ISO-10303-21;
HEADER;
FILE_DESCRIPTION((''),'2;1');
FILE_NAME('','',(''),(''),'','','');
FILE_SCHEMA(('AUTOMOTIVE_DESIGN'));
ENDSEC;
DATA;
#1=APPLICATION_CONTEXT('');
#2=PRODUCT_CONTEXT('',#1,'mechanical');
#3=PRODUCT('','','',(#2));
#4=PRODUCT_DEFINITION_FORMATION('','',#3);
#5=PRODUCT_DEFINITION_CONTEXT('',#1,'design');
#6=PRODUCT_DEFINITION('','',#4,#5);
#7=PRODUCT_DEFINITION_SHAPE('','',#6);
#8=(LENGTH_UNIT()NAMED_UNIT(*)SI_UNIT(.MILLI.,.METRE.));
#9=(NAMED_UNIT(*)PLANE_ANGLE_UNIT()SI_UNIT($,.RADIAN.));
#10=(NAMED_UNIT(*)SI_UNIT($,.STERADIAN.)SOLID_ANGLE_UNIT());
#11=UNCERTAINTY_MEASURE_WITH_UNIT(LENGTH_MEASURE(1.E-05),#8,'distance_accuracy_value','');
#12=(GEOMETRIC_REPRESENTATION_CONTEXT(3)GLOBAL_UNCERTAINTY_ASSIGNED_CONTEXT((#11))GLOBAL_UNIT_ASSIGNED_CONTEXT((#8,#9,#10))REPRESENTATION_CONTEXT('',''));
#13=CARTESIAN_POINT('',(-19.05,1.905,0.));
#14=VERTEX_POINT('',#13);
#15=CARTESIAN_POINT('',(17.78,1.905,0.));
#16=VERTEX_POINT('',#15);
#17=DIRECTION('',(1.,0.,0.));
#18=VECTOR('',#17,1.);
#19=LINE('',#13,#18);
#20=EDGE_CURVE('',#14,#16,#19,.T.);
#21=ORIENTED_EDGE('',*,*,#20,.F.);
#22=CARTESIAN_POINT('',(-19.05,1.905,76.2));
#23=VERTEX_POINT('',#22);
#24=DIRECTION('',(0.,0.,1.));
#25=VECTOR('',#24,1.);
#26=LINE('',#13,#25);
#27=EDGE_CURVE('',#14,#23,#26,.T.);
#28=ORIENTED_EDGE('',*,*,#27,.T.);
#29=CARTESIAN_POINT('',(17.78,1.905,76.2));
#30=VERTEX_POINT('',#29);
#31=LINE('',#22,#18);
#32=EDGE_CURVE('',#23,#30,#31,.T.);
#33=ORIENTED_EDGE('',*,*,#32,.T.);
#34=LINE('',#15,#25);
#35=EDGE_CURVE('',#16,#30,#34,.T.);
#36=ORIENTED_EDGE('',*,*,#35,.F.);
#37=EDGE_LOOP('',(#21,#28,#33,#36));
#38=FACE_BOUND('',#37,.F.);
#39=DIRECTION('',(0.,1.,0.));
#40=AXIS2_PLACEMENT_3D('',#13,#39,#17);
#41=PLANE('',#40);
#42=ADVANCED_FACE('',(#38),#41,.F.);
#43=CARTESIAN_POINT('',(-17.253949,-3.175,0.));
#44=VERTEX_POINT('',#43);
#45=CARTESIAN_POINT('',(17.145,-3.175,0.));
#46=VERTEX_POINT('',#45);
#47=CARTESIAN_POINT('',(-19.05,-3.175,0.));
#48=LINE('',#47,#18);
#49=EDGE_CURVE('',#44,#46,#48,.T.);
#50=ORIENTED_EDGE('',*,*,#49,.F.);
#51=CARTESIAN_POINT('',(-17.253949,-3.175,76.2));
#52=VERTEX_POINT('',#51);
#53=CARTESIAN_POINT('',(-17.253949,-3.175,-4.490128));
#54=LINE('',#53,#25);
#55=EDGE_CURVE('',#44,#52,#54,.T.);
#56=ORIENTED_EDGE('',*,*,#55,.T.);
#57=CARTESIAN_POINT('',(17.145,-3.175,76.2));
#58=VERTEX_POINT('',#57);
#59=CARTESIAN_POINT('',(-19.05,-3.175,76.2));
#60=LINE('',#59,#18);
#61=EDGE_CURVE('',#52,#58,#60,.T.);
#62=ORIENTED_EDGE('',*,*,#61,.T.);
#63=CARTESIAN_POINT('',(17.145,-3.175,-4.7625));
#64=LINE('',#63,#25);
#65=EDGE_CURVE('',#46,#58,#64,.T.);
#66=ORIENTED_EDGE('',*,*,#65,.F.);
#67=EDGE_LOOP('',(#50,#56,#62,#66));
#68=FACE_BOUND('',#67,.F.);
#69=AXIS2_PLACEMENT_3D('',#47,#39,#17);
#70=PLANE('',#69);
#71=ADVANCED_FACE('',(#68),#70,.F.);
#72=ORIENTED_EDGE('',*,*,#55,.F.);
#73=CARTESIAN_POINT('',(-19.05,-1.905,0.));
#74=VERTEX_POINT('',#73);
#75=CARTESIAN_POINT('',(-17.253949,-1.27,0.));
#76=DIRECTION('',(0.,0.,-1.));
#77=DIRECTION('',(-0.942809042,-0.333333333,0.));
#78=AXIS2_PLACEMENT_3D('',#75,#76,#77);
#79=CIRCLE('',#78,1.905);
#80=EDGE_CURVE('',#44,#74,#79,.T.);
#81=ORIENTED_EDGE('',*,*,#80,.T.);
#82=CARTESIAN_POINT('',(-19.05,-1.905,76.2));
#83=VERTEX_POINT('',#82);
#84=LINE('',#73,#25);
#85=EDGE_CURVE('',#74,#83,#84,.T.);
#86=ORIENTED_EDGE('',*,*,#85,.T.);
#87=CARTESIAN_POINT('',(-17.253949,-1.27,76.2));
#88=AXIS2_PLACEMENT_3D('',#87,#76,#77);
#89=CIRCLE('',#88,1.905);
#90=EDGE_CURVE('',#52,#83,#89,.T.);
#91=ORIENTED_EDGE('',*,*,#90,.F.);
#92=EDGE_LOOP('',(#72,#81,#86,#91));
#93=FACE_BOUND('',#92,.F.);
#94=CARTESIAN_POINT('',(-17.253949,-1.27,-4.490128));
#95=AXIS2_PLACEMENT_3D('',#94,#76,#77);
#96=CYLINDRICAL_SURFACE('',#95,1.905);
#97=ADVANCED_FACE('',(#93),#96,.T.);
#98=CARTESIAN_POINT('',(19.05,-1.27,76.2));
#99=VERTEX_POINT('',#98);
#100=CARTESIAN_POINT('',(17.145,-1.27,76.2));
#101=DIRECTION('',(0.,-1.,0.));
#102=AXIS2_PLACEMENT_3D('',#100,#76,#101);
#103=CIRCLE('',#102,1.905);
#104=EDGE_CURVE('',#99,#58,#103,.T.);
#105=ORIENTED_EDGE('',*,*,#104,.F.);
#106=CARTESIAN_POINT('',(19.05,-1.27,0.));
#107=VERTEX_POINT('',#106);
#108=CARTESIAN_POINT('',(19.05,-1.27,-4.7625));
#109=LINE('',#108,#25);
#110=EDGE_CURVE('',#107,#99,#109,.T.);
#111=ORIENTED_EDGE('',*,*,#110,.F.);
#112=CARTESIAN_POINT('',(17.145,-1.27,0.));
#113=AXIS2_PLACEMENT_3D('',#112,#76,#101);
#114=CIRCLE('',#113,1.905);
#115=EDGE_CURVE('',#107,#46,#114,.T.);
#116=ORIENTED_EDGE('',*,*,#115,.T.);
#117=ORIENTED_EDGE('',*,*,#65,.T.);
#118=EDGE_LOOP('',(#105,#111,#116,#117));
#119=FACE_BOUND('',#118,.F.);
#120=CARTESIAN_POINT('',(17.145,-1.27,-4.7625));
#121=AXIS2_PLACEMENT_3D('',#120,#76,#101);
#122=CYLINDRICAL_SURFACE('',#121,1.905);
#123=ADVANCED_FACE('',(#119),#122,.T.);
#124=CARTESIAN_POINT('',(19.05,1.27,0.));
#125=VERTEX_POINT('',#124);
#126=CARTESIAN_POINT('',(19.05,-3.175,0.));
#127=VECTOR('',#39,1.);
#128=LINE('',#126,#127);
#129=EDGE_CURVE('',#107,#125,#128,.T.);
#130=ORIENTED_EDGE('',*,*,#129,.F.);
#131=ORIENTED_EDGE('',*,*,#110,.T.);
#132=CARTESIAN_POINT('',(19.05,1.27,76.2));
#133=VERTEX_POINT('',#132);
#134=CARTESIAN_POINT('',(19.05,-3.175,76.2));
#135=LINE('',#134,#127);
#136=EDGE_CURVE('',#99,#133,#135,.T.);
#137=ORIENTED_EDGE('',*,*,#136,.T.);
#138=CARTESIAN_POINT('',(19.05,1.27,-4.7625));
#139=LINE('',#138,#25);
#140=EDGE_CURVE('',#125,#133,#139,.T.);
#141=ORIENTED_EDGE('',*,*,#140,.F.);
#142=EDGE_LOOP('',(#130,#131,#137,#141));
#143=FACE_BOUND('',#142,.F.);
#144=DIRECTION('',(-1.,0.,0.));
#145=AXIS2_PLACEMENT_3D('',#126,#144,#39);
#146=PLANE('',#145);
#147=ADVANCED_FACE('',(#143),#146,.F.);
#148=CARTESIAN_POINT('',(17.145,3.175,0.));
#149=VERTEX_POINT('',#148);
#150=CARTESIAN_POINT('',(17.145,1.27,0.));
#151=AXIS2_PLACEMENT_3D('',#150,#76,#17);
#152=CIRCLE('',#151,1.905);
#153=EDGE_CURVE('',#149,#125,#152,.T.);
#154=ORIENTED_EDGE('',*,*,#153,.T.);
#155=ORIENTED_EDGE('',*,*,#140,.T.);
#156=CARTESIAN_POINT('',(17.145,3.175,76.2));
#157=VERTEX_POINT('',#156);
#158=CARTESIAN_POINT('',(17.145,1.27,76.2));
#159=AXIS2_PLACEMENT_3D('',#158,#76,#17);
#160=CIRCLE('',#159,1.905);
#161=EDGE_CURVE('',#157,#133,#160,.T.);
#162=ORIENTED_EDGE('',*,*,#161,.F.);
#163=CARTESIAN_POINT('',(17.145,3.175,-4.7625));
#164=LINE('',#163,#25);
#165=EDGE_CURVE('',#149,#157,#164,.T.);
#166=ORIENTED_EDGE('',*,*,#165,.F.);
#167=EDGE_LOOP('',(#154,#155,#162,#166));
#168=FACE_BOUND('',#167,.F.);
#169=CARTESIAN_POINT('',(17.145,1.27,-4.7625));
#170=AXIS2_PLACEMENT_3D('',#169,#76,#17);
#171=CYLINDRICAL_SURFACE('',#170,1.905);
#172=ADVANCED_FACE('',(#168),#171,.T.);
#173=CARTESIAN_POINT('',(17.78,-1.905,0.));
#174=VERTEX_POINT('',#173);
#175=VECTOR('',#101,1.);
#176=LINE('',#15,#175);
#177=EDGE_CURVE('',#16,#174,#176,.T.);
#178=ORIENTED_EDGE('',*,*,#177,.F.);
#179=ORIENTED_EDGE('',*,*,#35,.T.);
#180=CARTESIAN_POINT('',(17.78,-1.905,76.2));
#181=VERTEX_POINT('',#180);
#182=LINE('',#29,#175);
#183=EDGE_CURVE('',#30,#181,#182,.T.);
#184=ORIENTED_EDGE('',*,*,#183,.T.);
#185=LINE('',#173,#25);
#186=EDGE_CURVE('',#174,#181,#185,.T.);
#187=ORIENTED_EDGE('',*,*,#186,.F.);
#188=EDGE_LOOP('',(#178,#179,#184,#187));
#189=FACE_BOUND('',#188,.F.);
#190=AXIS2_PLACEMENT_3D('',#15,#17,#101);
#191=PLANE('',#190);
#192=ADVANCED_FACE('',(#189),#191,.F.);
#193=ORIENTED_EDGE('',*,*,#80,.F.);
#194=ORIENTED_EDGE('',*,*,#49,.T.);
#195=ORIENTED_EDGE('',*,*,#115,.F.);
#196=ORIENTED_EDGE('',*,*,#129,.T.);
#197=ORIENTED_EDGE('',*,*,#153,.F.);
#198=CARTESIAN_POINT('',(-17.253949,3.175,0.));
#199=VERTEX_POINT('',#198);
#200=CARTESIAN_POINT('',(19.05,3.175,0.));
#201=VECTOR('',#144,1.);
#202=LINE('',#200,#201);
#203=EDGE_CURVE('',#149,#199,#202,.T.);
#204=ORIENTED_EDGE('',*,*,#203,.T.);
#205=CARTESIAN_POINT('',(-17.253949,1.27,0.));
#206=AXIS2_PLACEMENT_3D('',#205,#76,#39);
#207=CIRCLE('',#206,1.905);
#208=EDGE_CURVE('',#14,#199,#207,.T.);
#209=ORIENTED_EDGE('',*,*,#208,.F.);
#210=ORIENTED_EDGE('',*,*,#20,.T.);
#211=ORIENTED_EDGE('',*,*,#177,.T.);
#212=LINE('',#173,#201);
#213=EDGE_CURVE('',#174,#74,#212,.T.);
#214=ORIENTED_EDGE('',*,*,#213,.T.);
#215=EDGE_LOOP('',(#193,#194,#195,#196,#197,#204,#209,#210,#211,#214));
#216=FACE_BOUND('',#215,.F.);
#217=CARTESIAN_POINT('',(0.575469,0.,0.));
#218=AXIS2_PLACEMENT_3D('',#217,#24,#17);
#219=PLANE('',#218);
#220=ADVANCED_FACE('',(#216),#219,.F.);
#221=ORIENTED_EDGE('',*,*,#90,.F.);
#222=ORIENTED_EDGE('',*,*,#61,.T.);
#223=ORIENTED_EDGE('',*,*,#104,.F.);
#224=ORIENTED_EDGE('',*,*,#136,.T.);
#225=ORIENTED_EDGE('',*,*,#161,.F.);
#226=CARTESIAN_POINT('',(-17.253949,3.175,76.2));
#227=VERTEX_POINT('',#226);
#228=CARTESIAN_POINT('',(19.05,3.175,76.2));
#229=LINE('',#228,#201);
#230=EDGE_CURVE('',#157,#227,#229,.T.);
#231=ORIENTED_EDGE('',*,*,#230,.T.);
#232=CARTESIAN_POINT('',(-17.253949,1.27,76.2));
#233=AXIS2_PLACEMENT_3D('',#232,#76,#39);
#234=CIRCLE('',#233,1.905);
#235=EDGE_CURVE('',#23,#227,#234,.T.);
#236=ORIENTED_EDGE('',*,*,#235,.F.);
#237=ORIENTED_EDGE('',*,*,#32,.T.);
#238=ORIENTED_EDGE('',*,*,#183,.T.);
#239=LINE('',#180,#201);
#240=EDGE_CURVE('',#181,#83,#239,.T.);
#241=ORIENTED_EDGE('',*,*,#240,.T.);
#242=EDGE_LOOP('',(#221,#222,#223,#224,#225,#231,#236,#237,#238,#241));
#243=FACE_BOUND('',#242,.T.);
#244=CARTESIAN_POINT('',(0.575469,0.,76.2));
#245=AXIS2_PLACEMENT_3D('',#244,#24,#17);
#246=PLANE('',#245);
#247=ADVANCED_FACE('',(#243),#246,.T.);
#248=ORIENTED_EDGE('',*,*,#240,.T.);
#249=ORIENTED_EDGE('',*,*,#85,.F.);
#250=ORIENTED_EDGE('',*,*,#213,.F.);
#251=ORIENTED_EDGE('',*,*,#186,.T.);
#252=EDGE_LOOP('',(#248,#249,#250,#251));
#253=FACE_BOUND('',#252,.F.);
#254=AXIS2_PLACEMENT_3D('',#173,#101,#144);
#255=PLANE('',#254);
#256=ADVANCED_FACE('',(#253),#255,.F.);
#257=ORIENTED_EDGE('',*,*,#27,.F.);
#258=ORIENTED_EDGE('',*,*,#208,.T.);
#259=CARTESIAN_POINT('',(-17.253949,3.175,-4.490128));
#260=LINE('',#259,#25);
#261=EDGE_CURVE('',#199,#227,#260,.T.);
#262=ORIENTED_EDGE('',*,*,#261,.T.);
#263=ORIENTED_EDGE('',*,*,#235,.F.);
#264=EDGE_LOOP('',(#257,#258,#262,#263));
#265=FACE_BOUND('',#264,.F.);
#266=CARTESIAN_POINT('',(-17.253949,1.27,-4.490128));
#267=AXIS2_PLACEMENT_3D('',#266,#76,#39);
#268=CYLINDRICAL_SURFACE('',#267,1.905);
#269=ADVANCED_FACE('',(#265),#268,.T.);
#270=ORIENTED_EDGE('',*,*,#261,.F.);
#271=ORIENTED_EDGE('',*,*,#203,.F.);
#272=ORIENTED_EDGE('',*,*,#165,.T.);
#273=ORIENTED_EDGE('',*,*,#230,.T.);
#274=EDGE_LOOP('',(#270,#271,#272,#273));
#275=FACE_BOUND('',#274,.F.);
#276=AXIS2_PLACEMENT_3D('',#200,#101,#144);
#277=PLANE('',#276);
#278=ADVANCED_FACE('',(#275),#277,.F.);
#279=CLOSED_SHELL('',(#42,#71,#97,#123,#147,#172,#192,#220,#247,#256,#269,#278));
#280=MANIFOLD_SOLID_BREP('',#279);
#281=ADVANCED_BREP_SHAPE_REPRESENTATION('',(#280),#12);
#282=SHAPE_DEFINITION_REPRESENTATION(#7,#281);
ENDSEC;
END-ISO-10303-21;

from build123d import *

# Parameters (mm, degrees)
F1_DEPTH    = 76.2
F2_T1_DEPTH = 85.725
F2_T3_DEPTH = 85.1802561211


# Not quite as in the source:
# - a fillet or chamfer that OpenCascade refuses, or shapes differently, is made with other operations: its cross-section is extruded or revolved along the edge and cut away or added


with BuildPart() as f1:
    # F0 (on Top) → F1 (new body)
    with BuildSketch(Plane.XY):
        Polygon((-19.05, -3.175), (19.05, -3.175), (19.05, 3.175), (-19.05, 3.175), (-19.05, 1.905), (17.78, 1.905), (17.78, -1.905), (-19.05, -1.905), align=None)
    extrude(amount=F1_DEPTH)

    # F2: fillet of radius 1.905 on 4 edges, made by hand

    # F2_s2 → F2_t1 (cut)
    with BuildSketch(Plane.XY.offset(-4.7625)):
        with BuildLine():
            ThreePointArc((19.05, 1.27), (18.4920384182, 2.6170384182), (17.145, 3.175))
            Line((17.145, 3.175), (19.05, 3.175))
            Line((19.05, 3.175), (19.05, 1.27))
        make_face()
        with BuildLine():
            ThreePointArc((17.145, -3.175), (18.4920384182, -2.6170384182), (19.05, -1.27))
            Line((19.05, -1.27), (19.05, -3.175))
            Line((19.05, -3.175), (17.145, -3.175))
        make_face()
    extrude(amount=F2_T1_DEPTH, mode=Mode.SUBTRACT)

    # F2_s4 → F2_t3 (cut)
    with BuildSketch(Plane.XY.offset(-4.4901280605)):
        with BuildLine():
            ThreePointArc((-19.05, -1.905), (-18.3538010386, -2.8254259867), (-17.2539487758, -3.175))
            Line((-17.2539487758, -3.175), (-19.05, -3.175))
            Line((-19.05, -3.175), (-19.05, -1.905))
        make_face()
        with BuildLine():
            ThreePointArc((-17.2539487758, 3.175), (-18.3538010386, 2.8254259867), (-19.05, 1.905))
            Line((-19.05, 1.905), (-19.05, 3.175))
            Line((-19.05, 3.175), (-17.2539487758, 3.175))
        make_face()
    extrude(amount=F2_T3_DEPTH, mode=Mode.SUBTRACT)


solid = f1.part
